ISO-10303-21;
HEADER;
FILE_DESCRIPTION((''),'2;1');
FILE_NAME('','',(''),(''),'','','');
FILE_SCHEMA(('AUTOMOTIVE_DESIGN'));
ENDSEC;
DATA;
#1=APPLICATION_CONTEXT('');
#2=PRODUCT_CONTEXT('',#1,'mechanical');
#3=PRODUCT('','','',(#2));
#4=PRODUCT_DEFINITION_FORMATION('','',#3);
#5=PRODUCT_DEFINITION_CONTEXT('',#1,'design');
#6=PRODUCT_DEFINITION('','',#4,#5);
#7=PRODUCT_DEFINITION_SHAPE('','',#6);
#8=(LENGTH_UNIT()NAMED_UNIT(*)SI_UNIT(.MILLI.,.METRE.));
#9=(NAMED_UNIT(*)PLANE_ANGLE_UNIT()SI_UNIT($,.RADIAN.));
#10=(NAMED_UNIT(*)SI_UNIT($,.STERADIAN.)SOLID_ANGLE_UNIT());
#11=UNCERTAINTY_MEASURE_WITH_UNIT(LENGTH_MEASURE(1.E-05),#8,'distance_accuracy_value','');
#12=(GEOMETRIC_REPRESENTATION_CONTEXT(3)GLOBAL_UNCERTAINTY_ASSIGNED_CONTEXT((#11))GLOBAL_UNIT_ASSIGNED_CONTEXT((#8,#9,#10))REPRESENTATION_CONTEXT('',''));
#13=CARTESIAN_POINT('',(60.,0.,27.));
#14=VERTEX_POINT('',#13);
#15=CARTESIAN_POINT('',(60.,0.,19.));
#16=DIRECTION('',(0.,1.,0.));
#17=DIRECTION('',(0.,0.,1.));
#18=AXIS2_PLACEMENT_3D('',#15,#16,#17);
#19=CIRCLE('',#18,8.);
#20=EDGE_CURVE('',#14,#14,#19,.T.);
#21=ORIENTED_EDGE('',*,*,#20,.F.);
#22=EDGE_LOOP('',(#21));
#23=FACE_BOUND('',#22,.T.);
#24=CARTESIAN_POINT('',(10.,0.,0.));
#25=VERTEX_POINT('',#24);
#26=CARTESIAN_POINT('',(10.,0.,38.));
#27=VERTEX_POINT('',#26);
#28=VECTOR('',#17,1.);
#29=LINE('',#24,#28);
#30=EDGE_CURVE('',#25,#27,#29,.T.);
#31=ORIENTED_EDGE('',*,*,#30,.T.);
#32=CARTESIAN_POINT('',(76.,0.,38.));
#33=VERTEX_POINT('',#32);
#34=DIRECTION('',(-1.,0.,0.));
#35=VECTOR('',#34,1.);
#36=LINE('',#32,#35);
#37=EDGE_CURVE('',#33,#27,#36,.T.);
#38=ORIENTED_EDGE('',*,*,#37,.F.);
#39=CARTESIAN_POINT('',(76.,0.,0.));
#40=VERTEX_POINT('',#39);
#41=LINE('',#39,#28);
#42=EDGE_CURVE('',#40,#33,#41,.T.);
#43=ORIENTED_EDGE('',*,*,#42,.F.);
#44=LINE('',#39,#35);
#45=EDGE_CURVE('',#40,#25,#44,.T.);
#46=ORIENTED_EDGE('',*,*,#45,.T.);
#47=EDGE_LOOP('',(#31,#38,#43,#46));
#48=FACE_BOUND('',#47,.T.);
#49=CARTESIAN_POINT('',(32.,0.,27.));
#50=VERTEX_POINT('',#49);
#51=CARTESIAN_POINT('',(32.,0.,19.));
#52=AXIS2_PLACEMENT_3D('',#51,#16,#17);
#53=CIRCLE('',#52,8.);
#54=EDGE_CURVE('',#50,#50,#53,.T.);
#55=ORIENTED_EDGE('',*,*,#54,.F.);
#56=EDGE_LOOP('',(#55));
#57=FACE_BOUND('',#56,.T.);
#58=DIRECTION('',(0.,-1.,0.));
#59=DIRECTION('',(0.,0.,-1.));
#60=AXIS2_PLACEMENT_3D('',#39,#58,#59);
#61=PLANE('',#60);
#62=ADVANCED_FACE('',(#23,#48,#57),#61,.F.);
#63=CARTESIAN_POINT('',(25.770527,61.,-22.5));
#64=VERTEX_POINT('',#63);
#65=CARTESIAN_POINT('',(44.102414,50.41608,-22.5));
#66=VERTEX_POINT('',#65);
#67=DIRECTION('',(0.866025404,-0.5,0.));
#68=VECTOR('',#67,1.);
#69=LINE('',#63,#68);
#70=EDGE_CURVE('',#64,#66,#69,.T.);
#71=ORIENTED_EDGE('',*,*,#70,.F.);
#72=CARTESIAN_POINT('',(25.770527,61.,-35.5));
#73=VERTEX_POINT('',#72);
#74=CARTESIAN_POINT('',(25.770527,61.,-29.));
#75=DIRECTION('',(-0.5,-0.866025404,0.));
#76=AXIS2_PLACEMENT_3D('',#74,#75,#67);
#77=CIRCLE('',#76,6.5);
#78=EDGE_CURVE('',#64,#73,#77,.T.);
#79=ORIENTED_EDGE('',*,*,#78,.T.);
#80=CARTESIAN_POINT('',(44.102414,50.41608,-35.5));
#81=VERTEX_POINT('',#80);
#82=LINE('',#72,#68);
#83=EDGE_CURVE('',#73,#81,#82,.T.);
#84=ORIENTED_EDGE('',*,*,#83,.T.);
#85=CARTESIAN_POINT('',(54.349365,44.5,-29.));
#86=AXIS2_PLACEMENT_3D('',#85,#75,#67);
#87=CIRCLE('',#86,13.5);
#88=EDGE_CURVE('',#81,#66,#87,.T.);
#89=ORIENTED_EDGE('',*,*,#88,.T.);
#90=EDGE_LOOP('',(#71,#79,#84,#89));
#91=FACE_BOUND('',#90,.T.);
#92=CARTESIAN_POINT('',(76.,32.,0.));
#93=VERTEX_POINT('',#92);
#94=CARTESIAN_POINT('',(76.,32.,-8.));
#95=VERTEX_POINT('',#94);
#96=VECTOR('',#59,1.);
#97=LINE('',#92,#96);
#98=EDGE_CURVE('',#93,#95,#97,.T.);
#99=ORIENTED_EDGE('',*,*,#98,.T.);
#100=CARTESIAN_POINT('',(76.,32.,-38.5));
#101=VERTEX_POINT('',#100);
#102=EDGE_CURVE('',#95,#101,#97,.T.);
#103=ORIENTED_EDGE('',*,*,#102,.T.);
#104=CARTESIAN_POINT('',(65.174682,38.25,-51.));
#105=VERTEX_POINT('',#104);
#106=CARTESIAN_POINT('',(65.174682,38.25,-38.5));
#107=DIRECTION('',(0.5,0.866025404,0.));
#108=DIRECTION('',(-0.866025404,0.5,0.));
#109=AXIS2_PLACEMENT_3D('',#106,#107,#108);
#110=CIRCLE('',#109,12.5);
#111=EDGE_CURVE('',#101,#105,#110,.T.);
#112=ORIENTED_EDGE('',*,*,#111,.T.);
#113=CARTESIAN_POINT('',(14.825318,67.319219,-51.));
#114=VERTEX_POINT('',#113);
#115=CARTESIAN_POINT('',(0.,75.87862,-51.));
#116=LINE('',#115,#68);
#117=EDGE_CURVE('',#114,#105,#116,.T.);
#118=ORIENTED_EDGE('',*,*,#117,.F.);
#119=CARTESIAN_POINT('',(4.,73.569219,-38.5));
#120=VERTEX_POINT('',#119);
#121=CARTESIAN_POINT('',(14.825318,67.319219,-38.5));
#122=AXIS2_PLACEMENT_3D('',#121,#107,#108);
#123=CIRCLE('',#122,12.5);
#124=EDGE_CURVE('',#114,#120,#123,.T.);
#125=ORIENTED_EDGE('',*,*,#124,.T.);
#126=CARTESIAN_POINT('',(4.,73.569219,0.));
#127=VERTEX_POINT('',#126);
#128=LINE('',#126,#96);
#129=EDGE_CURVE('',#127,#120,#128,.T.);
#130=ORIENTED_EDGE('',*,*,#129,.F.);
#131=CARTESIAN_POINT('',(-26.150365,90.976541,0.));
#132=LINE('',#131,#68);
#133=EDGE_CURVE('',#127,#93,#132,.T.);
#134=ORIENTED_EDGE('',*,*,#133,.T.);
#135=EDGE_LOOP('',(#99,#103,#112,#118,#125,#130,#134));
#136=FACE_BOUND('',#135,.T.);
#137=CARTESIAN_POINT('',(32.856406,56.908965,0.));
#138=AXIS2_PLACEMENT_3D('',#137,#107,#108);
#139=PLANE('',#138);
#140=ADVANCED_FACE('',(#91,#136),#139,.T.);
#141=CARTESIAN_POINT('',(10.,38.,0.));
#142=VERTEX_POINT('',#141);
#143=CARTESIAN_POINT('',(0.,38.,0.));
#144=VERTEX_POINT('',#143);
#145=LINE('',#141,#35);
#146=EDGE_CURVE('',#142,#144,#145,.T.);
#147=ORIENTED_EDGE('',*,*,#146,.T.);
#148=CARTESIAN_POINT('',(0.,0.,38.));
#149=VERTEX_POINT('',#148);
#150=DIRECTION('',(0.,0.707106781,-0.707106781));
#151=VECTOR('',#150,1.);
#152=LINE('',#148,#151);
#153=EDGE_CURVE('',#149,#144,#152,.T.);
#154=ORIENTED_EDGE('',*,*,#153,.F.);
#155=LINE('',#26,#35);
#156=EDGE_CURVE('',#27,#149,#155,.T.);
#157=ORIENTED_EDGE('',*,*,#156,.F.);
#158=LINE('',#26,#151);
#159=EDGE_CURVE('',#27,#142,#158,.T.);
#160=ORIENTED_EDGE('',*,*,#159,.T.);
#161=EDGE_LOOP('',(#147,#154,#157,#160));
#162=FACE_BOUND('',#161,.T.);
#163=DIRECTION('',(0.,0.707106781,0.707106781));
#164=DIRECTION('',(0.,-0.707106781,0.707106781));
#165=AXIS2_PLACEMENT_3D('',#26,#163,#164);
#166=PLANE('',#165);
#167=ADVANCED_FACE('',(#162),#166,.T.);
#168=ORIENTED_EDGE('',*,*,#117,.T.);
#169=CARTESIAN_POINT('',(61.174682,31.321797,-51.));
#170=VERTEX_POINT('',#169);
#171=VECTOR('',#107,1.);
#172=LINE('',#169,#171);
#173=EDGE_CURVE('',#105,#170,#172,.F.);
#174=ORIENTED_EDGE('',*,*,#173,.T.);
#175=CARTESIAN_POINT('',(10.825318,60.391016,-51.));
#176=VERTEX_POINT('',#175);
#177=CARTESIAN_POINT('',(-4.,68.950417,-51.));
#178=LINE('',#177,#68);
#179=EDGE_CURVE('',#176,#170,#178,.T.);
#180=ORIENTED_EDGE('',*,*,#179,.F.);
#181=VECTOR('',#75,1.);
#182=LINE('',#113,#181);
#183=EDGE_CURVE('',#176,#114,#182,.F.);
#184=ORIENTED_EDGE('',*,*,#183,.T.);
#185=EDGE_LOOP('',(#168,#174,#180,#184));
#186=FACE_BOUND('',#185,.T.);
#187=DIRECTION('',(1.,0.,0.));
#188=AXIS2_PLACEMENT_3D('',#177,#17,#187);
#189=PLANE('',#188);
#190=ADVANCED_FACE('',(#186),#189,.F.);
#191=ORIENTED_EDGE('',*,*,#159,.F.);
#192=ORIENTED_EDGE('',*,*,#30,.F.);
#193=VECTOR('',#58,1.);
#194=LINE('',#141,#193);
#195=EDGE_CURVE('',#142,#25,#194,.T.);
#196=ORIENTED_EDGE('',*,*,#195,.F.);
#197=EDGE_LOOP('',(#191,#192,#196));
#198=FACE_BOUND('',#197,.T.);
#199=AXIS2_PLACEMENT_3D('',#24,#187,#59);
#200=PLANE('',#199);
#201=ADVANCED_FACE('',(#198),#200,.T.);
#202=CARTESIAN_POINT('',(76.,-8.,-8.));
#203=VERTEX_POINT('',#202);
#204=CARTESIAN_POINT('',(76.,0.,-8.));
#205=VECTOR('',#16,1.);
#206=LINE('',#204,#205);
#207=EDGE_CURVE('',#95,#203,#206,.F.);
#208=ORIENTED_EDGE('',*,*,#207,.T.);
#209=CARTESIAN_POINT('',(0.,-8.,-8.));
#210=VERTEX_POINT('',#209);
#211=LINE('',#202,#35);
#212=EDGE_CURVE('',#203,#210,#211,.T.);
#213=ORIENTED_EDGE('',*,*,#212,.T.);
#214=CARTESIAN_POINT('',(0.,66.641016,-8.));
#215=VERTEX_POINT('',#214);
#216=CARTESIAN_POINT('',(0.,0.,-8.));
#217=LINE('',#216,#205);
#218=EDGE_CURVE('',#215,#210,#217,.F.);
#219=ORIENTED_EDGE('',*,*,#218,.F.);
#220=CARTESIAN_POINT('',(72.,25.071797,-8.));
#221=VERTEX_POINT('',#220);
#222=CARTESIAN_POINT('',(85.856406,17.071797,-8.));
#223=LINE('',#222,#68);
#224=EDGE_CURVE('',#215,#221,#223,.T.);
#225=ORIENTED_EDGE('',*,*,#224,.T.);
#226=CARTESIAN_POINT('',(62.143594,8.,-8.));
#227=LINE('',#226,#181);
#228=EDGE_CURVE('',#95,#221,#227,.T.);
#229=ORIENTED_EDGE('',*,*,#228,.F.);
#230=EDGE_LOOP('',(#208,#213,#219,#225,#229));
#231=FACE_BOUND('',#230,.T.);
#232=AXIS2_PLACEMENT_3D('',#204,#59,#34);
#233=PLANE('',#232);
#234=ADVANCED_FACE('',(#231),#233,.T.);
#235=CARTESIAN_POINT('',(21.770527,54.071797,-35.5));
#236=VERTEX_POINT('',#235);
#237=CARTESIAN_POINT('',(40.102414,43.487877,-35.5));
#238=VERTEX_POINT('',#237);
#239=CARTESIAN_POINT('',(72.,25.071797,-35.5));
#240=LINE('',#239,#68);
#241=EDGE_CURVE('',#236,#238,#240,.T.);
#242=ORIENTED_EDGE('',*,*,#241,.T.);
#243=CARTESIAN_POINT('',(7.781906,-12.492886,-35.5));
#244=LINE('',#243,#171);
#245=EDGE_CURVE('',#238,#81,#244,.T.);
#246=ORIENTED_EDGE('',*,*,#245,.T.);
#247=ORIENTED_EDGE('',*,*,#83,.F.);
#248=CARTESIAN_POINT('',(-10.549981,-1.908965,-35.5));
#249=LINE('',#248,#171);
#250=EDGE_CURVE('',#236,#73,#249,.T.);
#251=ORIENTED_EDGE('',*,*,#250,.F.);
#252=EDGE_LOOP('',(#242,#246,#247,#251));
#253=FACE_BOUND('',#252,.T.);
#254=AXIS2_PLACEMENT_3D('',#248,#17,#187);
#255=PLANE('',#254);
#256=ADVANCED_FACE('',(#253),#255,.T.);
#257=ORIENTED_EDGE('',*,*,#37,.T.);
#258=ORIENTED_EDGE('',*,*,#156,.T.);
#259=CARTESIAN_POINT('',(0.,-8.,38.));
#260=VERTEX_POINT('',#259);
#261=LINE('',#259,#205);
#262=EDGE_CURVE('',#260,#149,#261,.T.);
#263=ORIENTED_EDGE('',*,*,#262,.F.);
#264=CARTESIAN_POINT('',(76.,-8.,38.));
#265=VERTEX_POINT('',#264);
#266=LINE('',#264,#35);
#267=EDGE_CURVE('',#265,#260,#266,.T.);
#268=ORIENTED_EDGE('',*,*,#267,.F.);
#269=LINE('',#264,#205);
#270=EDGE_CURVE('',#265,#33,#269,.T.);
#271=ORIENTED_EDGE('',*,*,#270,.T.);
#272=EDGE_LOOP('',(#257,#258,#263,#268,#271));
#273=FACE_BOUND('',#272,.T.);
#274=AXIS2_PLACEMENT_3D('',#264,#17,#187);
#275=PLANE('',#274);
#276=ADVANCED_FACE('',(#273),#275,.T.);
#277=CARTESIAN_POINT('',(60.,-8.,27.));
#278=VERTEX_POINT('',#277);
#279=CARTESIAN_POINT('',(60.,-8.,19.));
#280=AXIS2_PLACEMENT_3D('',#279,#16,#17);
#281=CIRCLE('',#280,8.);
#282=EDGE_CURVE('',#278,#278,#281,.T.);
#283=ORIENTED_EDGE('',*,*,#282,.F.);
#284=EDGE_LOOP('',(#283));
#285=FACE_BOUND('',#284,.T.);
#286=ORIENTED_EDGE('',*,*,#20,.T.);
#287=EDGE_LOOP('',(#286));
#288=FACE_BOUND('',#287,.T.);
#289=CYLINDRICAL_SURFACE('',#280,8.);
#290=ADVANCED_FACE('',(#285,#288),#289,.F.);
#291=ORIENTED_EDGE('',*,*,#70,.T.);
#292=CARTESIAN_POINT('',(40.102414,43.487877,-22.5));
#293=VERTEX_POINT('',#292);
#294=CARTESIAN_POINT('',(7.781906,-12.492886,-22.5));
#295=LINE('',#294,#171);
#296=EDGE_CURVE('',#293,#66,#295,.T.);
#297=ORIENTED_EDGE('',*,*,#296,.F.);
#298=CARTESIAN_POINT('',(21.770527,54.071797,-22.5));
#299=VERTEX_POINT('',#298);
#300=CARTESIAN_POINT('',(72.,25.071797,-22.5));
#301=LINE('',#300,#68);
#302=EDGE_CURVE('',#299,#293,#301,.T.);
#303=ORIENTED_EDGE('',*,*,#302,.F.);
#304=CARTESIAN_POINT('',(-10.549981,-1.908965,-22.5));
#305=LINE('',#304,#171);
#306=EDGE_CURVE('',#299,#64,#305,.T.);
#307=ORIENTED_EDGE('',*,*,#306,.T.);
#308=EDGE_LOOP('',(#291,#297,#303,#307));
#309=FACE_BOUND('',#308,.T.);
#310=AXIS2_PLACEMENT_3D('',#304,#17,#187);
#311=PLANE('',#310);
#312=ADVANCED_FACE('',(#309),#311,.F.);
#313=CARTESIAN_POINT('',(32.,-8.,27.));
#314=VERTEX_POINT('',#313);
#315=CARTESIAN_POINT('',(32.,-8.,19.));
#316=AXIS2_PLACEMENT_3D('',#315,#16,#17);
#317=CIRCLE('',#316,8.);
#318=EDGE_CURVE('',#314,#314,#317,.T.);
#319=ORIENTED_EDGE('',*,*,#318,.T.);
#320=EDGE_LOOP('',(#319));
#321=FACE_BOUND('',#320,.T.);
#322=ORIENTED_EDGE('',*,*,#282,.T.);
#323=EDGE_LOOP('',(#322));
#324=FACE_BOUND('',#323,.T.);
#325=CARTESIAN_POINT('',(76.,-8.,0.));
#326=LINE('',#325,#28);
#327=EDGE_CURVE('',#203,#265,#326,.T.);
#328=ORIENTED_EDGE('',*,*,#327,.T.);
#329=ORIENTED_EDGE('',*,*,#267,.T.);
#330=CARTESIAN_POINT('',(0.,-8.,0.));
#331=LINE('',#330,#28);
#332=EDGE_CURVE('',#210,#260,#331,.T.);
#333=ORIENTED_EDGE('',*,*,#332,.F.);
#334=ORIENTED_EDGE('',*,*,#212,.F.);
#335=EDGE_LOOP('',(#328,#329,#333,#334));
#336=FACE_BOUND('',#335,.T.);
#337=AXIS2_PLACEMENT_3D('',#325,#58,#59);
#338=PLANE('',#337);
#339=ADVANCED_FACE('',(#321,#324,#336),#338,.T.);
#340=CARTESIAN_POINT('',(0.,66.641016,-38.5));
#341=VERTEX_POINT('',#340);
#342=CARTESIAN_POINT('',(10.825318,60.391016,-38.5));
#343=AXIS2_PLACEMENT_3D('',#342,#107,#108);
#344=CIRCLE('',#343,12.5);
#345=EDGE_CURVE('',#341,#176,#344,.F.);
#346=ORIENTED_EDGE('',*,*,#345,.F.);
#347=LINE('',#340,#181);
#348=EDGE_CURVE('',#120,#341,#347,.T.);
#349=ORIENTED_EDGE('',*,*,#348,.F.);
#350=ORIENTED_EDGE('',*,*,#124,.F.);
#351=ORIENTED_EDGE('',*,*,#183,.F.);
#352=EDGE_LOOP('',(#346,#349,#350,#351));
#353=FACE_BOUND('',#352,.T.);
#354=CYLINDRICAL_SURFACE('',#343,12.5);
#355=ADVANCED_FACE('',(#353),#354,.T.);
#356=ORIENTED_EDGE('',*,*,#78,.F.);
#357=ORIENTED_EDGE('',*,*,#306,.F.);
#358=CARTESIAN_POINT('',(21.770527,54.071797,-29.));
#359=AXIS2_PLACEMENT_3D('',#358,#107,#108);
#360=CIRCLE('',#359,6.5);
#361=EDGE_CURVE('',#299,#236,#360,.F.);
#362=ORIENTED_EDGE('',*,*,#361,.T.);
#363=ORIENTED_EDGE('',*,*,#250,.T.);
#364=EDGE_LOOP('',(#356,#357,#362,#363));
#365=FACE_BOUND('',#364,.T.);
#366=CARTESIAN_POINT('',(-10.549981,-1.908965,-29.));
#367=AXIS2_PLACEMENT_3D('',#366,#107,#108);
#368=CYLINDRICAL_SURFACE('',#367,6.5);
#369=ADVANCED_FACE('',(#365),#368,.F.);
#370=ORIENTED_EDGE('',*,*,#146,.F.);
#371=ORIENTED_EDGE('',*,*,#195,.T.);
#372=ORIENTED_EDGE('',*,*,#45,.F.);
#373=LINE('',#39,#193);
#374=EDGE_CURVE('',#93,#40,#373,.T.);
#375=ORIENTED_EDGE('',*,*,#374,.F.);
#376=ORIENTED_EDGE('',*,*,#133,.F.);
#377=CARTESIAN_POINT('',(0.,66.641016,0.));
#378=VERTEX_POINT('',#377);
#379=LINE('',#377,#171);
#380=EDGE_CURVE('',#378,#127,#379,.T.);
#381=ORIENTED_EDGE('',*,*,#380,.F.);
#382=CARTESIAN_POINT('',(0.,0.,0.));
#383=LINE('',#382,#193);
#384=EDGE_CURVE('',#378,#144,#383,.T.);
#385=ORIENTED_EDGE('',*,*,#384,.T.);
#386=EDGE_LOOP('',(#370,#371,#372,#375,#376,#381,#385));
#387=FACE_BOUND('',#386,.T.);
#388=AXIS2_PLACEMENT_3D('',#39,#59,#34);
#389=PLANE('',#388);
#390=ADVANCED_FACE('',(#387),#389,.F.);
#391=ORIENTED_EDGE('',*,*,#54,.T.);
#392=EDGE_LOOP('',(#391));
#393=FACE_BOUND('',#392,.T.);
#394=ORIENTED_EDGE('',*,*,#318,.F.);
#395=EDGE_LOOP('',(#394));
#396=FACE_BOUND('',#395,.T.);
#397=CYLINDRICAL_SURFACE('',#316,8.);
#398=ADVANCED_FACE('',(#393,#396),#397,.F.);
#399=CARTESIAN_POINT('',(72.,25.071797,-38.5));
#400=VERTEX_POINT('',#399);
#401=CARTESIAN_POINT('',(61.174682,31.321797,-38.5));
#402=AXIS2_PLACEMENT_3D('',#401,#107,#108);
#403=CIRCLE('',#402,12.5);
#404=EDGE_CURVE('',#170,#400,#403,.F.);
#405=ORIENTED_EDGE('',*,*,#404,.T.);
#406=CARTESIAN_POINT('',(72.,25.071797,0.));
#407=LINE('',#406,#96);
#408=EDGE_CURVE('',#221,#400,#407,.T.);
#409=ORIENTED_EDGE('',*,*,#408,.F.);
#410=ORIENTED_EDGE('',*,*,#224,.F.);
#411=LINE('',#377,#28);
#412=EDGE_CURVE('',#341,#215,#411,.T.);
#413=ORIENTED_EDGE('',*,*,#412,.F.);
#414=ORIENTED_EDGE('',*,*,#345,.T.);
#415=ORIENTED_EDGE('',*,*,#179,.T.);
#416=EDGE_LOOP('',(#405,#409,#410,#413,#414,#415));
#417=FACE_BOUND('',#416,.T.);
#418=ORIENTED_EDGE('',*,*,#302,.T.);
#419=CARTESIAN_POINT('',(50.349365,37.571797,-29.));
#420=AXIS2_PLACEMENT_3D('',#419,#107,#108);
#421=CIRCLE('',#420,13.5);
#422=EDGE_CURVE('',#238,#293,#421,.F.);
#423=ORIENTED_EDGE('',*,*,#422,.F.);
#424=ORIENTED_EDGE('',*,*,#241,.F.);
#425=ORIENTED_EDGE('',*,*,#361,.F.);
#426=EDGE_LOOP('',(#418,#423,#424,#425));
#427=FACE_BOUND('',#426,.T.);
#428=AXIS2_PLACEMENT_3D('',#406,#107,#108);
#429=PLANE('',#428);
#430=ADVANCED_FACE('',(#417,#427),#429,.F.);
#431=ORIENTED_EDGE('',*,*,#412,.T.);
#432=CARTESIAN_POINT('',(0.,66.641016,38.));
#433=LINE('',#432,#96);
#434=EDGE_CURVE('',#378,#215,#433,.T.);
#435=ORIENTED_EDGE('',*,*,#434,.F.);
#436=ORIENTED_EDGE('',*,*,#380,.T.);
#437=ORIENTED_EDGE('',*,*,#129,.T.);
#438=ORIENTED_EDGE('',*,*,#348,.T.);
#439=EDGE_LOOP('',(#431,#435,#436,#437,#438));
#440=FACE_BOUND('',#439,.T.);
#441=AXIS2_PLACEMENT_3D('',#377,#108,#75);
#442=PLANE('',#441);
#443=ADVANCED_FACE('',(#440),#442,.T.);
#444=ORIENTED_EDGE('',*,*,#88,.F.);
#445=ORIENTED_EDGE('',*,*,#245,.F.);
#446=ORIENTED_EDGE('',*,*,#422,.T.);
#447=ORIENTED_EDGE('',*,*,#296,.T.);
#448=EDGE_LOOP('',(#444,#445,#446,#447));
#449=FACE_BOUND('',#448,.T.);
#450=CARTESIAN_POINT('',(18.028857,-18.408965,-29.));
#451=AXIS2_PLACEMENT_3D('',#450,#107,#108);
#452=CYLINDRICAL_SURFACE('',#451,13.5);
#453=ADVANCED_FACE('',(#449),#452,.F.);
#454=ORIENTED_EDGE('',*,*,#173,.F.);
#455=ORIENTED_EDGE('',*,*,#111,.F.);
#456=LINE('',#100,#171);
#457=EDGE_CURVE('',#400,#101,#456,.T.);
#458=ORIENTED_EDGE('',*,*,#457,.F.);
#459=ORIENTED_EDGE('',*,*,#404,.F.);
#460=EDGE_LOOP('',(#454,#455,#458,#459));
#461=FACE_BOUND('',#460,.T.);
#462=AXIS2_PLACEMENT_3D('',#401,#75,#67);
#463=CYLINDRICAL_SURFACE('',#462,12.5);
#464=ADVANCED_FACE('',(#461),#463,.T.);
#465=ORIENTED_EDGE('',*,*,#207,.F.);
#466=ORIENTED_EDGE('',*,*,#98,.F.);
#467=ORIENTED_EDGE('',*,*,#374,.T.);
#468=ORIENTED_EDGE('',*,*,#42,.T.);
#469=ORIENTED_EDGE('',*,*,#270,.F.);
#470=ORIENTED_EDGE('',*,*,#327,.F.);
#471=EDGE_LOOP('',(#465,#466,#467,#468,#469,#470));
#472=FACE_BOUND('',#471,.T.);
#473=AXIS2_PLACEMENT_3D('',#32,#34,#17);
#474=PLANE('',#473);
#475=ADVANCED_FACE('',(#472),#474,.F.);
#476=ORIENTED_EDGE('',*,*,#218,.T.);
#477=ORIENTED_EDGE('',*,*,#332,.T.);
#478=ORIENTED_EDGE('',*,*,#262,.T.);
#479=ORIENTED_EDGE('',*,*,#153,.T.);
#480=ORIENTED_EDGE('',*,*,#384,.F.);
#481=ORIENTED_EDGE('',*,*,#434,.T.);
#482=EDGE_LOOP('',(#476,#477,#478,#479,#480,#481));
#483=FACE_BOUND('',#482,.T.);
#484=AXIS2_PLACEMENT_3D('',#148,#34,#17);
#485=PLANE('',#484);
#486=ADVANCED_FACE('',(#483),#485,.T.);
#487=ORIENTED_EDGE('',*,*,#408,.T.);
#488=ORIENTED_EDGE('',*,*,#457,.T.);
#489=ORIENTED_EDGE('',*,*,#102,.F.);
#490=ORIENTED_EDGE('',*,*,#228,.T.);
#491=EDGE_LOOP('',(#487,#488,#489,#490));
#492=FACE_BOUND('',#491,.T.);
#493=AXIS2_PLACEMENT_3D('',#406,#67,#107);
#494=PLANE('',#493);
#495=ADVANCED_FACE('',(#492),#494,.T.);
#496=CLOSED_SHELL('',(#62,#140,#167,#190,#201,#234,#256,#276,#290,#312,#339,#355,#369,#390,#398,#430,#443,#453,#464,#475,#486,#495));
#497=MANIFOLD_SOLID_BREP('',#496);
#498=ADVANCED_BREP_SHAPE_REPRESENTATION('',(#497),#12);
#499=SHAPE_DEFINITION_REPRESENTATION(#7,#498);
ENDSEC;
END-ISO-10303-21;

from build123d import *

# Parameters (mm, degrees)
BASE_EXTRUDE_THIN_DEPTH = 76
BOSS_EXTRUDE1_START     = -8
BOSS_EXTRUDE1_DEPTH     = 8
SKETCH3_W               = 87.757240917
SKETCH3_H               = 51
BOSS_EXTRUDE2_DEPTH     = 8
CUT_EXTRUDE1_DEPTH      = 119.888876867
FILLET1_R               = 12.5
BOSS_EXTRUDE3_DEPTH     = 10
CUT_EXTRUDE2_DEPTH      = 101.073742043
SKETCH9_R               = 8
CUT_EXTRUDE3_DEPTH      = 118.428403891
LPATTERN2_COUNT         = 2
LPATTERN2_PITCH         = 28


# Read off the part's stored shape, not the designer's step: Boss-Extrude1
with BuildPart() as part:
    # Sketch1 → Base-Extrude-Thin (new body)
    with BuildSketch(Plane(origin=(0, 0, 0), x_dir=(0, 0, -1), z_dir=(1, 0, 0))):
        Polygon((-38, 0), (0, 0), (0, 32), (8, 32), (8, -8), (-38, -8), align=None)
    extrude(amount=BASE_EXTRUDE_THIN_DEPTH)

    # Boss-Extrude1 outline → Boss-Extrude1 (add)
    with BuildSketch(Plane.XY.offset(BOSS_EXTRUDE1_START)):
        Polygon((76, 32), (0, 75.878620458), (0, 32), align=None)
    extrude(amount=BOSS_EXTRUDE1_DEPTH)

    # Sketch3 → Boss-Extrude2 (add)
    with BuildSketch(Plane(origin=(32.856406461, 56.908965344, 0), x_dir=(-0.8660254037844379, 0.5000000000000014, 0), z_dir=(0.5000000000000014, 0.8660254037844379, 0))):
        with Locations((-5.93931023, -25.5)):
            Rectangle(SKETCH3_W, SKETCH3_H)
    extrude(amount=-BOSS_EXTRUDE2_DEPTH)

    # Sketch4 → Cut-Extrude1 (cut, through all)
    with BuildSketch(Plane.XY):
        Polygon((-113.800448301, -130.46714223), (0, 66.641016151), (4, 73.569219382), (117.800448301, 270.677377763), (-276.415868462, 498.278274366), (-508.016765065, 97.133754372), align=None)
    extrude(amount=-CUT_EXTRUDE1_DEPTH, mode=Mode.SUBTRACT)

    # Fillet1
    fillet1_edges = [part.edges().sort_by_distance(p)[0] for p in [
        (74, 28.535898385, -51),
        (2, 70.105117767, -51),
    ]]
    fillet(fillet1_edges, radius=FILLET1_R)

    # Sketch5 → Boss-Extrude3 (add)
    with BuildSketch(Plane.ZY):
        Polygon((0, 38), (0, 0), (38, 0), align=None)
    extrude(amount=-BOSS_EXTRUDE3_DEPTH)

    # Sketch6 → Cut-Extrude2 (cut, through all)
    with BuildSketch(Plane(origin=(24.713169413, 61.610465445, -0.61351416), x_dir=(-0.866025403784438, 0.5000000000000012, 0), z_dir=(0.5000000000000011, 0.8660254037844379, 0))):
        with BuildLine():
            Line((-1.220930891, -34.88648584), (-22.388771324, -34.88648584))
            ThreePointArc((-22.388771324, -34.88648584), (-47.720930891, -28.38648584), (-22.388771324, -21.88648584))
            Line((-22.388771324, -21.88648584), (-1.220930891, -21.88648584))
            ThreePointArc((-1.220930891, -21.88648584), (5.279069109, -28.38648584), (-1.220930891, -34.88648584))
        make_face()
    extrude(amount=-CUT_EXTRUDE2_DEPTH, mode=Mode.SUBTRACT)

    # Sketch9 → Cut-Extrude3 (cut, through all)
    with BuildSketch(Plane(origin=(0, 0, 0), x_dir=(-1, 0, 0), z_dir=(0, 1, 0))):
        with Locations(Location((-60, 19, 0), (0, 0, 90))):
            Circle(SKETCH9_R)
    cut_extrude3 = extrude(amount=-CUT_EXTRUDE3_DEPTH, mode=Mode.SUBTRACT)

    # LPattern2: Cut-Extrude3 ×2
    with Locations(*[(-i * LPATTERN2_PITCH, 0, 0) for i in range(1, LPATTERN2_COUNT)]):
        add(cut_extrude3, mode=Mode.SUBTRACT)


solid = part.part
